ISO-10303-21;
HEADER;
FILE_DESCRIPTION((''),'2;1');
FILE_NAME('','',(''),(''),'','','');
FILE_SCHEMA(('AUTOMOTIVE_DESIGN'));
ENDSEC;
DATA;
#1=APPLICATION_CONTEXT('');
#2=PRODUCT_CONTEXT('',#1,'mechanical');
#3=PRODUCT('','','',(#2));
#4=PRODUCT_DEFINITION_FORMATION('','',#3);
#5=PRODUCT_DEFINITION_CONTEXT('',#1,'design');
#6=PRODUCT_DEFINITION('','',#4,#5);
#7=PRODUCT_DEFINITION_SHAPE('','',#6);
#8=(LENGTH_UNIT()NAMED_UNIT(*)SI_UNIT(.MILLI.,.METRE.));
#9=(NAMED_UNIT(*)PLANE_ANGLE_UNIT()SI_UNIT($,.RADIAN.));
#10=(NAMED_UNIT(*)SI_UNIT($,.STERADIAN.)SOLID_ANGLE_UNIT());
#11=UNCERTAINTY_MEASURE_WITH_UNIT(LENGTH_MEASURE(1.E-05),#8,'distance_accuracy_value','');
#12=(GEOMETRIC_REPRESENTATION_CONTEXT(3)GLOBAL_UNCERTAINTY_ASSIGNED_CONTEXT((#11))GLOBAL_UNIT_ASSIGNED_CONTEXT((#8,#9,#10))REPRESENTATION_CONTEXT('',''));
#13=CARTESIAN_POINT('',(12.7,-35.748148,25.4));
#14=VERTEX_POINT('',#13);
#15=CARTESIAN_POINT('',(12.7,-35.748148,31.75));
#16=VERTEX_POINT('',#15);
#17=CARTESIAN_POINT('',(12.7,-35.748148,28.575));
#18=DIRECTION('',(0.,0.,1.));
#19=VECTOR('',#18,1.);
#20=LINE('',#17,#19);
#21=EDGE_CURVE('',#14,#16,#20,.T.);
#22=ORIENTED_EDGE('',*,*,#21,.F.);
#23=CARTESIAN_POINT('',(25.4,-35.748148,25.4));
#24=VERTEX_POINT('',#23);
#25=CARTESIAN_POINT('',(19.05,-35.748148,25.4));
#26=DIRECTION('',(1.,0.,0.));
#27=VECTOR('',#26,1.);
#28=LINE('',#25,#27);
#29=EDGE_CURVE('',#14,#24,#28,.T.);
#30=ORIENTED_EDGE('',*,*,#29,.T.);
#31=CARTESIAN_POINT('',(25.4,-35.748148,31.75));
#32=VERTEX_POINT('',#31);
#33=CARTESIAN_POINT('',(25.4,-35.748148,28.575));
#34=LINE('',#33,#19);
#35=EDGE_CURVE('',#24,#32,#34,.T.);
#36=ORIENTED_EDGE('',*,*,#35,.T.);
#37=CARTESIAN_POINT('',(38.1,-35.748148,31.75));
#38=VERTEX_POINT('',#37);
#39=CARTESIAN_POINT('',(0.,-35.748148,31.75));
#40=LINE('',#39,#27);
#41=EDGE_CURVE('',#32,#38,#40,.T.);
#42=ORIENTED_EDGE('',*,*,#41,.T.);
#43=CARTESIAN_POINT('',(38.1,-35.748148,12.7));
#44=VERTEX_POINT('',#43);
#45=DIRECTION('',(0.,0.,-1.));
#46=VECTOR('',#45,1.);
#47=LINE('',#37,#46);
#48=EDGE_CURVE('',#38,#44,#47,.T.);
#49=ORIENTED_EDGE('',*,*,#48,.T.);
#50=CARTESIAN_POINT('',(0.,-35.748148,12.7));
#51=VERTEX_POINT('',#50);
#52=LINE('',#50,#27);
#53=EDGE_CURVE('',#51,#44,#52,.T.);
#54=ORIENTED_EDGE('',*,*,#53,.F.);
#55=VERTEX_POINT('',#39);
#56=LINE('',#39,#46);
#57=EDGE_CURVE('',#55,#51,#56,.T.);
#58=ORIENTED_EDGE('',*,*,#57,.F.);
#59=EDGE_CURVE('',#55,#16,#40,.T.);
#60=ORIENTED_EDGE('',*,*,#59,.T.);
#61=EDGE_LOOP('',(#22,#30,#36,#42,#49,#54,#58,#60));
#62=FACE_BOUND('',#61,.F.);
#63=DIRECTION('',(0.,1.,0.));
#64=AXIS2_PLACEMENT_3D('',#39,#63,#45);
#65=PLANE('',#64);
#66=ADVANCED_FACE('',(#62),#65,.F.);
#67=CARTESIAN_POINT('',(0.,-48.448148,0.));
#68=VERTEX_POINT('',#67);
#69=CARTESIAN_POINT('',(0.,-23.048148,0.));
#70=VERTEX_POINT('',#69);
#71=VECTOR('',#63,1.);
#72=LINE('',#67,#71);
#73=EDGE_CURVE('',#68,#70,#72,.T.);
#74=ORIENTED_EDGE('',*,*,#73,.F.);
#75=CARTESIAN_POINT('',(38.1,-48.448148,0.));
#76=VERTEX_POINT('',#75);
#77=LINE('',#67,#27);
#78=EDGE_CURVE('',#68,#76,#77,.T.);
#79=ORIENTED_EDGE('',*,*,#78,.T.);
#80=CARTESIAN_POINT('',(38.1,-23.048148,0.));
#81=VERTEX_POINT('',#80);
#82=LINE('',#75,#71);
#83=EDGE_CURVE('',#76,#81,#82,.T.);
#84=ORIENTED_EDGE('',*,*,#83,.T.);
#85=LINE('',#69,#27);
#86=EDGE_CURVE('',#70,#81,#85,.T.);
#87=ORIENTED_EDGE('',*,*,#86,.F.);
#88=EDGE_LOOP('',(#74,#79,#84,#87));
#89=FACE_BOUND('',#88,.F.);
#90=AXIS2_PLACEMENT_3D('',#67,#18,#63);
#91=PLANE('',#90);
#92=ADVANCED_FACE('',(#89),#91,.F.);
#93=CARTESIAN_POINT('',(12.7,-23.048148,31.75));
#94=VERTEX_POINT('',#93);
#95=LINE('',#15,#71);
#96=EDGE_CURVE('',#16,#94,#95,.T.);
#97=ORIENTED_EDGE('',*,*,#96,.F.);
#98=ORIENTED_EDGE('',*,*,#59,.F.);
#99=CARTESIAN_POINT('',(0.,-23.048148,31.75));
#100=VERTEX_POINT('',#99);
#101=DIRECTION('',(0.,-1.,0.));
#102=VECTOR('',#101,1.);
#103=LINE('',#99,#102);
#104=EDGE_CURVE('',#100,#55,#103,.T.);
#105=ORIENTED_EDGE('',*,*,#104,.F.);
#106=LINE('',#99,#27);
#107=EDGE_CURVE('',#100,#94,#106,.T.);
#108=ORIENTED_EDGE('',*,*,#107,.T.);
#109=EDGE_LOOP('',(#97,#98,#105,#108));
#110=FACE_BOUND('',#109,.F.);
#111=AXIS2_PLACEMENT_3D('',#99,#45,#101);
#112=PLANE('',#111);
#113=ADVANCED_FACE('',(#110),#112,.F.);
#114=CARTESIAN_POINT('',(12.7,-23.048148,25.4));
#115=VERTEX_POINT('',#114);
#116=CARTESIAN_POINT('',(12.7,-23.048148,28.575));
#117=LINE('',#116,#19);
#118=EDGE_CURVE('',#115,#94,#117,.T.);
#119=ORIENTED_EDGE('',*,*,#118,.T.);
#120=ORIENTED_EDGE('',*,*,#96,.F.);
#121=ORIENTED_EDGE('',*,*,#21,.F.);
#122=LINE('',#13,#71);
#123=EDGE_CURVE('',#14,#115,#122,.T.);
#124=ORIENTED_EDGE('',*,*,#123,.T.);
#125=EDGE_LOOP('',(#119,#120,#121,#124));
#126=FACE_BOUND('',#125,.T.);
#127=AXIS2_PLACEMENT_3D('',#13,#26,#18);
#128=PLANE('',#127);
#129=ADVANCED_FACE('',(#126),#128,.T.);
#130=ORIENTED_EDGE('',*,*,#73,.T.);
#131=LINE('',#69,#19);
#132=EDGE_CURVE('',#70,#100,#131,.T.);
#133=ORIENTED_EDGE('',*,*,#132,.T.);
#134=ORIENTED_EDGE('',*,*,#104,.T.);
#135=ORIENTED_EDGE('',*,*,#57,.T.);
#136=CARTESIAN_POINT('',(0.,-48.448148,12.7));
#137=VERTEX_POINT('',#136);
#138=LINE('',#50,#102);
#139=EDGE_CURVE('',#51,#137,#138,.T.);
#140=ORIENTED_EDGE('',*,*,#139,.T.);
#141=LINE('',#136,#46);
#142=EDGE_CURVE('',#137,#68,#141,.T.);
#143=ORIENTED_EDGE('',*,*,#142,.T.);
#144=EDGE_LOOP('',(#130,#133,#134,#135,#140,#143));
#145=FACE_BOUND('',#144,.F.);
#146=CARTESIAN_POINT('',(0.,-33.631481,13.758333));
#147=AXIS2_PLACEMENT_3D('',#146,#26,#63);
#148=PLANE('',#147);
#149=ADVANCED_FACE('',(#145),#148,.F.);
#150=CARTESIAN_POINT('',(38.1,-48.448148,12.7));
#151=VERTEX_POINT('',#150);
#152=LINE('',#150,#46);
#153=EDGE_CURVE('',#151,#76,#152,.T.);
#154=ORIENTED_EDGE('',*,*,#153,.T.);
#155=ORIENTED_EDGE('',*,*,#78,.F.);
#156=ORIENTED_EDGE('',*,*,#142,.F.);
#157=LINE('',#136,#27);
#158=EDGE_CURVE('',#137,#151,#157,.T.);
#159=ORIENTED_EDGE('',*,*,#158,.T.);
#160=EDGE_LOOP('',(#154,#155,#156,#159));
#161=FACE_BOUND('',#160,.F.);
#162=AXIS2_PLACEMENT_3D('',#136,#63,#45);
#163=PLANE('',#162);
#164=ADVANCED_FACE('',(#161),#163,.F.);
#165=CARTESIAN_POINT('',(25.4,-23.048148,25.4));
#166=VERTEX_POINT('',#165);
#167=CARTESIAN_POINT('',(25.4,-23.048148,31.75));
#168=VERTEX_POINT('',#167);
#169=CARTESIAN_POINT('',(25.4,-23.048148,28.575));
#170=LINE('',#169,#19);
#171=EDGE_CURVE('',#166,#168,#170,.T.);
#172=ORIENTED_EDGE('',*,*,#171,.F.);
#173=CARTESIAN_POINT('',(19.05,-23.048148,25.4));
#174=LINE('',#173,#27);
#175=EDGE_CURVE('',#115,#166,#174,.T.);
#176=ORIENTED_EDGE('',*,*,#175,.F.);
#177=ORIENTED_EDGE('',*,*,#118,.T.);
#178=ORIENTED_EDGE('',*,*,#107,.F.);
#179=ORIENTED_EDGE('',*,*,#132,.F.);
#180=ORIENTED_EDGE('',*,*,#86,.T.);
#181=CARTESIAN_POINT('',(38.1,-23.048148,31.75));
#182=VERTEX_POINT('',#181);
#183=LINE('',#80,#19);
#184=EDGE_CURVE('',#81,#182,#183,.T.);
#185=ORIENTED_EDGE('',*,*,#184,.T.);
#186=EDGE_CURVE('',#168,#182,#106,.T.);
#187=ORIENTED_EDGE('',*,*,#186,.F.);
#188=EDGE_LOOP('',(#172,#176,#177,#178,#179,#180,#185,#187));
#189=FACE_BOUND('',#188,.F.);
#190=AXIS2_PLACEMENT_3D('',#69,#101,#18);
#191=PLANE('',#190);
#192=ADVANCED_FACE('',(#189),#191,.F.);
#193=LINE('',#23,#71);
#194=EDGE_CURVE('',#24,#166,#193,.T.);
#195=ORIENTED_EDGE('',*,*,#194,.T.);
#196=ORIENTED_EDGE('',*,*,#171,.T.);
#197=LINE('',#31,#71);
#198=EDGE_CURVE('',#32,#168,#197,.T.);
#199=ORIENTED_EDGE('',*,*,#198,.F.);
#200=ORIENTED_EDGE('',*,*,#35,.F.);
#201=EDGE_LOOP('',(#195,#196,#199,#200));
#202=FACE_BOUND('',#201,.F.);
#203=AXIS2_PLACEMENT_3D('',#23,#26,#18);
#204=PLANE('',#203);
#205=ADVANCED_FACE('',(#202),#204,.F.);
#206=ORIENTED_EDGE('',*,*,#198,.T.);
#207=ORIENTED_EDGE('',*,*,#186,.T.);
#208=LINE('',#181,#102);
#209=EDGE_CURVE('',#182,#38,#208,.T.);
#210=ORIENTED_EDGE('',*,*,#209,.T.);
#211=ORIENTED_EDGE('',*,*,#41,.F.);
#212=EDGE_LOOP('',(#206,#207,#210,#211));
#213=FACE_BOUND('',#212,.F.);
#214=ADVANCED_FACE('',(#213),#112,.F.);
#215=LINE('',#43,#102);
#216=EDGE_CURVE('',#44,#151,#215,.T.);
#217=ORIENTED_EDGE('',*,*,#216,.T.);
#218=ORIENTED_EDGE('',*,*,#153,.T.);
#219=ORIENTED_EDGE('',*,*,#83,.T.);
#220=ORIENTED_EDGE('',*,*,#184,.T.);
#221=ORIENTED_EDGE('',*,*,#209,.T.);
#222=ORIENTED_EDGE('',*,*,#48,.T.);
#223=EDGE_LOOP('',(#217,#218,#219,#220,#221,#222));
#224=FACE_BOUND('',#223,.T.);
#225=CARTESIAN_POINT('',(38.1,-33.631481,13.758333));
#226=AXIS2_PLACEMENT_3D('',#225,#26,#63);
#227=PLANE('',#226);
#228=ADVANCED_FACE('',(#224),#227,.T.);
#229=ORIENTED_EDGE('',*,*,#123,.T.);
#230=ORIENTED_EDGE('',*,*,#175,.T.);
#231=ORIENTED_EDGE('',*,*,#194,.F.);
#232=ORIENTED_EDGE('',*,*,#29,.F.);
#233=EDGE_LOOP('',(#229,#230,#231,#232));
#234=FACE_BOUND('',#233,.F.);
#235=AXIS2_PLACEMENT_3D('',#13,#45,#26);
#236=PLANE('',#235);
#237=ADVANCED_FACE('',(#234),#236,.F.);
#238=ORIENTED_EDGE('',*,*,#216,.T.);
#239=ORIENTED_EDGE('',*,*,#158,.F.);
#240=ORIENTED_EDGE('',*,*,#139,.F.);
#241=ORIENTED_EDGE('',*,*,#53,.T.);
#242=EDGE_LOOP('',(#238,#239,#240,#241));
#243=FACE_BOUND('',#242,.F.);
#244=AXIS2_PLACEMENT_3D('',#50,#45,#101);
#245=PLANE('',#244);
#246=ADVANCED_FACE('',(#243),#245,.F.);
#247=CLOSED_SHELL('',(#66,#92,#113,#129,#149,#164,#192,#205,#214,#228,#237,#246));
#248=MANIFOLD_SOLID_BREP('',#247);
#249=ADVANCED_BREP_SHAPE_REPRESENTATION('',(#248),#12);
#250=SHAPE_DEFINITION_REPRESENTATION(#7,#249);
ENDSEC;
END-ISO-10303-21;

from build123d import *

# Parameters (mm, degrees)
F1_DEPTH = 38.1
F2_W     = 12.7
F2_H     = 6.35
F3_DEPTH = 12.7


# Not quite as in the source:
# - a feature names something its author has since deleted; it is built from what else it names


with BuildPart() as f1:
    # F0 (on Right) → F1 (new body)
    with BuildSketch(Plane.YZ):
        Polygon((-23.0481477177, 0), (-23.0481477177, 31.75), (-35.7481477177, 31.75), (-35.7481477177, 12.7), (-48.4481477177, 12.7), (-48.4481477177, 0), align=None)
    extrude(amount=F1_DEPTH)

    # F2 (on face) → F3 (cut)
    with BuildSketch(Plane.XZ.offset(35.7481477177)):
        with Locations((19.05, 28.575)):
            Rectangle(F2_W, F2_H)
    extrude(amount=-F3_DEPTH, mode=Mode.SUBTRACT)


solid = f1.part
